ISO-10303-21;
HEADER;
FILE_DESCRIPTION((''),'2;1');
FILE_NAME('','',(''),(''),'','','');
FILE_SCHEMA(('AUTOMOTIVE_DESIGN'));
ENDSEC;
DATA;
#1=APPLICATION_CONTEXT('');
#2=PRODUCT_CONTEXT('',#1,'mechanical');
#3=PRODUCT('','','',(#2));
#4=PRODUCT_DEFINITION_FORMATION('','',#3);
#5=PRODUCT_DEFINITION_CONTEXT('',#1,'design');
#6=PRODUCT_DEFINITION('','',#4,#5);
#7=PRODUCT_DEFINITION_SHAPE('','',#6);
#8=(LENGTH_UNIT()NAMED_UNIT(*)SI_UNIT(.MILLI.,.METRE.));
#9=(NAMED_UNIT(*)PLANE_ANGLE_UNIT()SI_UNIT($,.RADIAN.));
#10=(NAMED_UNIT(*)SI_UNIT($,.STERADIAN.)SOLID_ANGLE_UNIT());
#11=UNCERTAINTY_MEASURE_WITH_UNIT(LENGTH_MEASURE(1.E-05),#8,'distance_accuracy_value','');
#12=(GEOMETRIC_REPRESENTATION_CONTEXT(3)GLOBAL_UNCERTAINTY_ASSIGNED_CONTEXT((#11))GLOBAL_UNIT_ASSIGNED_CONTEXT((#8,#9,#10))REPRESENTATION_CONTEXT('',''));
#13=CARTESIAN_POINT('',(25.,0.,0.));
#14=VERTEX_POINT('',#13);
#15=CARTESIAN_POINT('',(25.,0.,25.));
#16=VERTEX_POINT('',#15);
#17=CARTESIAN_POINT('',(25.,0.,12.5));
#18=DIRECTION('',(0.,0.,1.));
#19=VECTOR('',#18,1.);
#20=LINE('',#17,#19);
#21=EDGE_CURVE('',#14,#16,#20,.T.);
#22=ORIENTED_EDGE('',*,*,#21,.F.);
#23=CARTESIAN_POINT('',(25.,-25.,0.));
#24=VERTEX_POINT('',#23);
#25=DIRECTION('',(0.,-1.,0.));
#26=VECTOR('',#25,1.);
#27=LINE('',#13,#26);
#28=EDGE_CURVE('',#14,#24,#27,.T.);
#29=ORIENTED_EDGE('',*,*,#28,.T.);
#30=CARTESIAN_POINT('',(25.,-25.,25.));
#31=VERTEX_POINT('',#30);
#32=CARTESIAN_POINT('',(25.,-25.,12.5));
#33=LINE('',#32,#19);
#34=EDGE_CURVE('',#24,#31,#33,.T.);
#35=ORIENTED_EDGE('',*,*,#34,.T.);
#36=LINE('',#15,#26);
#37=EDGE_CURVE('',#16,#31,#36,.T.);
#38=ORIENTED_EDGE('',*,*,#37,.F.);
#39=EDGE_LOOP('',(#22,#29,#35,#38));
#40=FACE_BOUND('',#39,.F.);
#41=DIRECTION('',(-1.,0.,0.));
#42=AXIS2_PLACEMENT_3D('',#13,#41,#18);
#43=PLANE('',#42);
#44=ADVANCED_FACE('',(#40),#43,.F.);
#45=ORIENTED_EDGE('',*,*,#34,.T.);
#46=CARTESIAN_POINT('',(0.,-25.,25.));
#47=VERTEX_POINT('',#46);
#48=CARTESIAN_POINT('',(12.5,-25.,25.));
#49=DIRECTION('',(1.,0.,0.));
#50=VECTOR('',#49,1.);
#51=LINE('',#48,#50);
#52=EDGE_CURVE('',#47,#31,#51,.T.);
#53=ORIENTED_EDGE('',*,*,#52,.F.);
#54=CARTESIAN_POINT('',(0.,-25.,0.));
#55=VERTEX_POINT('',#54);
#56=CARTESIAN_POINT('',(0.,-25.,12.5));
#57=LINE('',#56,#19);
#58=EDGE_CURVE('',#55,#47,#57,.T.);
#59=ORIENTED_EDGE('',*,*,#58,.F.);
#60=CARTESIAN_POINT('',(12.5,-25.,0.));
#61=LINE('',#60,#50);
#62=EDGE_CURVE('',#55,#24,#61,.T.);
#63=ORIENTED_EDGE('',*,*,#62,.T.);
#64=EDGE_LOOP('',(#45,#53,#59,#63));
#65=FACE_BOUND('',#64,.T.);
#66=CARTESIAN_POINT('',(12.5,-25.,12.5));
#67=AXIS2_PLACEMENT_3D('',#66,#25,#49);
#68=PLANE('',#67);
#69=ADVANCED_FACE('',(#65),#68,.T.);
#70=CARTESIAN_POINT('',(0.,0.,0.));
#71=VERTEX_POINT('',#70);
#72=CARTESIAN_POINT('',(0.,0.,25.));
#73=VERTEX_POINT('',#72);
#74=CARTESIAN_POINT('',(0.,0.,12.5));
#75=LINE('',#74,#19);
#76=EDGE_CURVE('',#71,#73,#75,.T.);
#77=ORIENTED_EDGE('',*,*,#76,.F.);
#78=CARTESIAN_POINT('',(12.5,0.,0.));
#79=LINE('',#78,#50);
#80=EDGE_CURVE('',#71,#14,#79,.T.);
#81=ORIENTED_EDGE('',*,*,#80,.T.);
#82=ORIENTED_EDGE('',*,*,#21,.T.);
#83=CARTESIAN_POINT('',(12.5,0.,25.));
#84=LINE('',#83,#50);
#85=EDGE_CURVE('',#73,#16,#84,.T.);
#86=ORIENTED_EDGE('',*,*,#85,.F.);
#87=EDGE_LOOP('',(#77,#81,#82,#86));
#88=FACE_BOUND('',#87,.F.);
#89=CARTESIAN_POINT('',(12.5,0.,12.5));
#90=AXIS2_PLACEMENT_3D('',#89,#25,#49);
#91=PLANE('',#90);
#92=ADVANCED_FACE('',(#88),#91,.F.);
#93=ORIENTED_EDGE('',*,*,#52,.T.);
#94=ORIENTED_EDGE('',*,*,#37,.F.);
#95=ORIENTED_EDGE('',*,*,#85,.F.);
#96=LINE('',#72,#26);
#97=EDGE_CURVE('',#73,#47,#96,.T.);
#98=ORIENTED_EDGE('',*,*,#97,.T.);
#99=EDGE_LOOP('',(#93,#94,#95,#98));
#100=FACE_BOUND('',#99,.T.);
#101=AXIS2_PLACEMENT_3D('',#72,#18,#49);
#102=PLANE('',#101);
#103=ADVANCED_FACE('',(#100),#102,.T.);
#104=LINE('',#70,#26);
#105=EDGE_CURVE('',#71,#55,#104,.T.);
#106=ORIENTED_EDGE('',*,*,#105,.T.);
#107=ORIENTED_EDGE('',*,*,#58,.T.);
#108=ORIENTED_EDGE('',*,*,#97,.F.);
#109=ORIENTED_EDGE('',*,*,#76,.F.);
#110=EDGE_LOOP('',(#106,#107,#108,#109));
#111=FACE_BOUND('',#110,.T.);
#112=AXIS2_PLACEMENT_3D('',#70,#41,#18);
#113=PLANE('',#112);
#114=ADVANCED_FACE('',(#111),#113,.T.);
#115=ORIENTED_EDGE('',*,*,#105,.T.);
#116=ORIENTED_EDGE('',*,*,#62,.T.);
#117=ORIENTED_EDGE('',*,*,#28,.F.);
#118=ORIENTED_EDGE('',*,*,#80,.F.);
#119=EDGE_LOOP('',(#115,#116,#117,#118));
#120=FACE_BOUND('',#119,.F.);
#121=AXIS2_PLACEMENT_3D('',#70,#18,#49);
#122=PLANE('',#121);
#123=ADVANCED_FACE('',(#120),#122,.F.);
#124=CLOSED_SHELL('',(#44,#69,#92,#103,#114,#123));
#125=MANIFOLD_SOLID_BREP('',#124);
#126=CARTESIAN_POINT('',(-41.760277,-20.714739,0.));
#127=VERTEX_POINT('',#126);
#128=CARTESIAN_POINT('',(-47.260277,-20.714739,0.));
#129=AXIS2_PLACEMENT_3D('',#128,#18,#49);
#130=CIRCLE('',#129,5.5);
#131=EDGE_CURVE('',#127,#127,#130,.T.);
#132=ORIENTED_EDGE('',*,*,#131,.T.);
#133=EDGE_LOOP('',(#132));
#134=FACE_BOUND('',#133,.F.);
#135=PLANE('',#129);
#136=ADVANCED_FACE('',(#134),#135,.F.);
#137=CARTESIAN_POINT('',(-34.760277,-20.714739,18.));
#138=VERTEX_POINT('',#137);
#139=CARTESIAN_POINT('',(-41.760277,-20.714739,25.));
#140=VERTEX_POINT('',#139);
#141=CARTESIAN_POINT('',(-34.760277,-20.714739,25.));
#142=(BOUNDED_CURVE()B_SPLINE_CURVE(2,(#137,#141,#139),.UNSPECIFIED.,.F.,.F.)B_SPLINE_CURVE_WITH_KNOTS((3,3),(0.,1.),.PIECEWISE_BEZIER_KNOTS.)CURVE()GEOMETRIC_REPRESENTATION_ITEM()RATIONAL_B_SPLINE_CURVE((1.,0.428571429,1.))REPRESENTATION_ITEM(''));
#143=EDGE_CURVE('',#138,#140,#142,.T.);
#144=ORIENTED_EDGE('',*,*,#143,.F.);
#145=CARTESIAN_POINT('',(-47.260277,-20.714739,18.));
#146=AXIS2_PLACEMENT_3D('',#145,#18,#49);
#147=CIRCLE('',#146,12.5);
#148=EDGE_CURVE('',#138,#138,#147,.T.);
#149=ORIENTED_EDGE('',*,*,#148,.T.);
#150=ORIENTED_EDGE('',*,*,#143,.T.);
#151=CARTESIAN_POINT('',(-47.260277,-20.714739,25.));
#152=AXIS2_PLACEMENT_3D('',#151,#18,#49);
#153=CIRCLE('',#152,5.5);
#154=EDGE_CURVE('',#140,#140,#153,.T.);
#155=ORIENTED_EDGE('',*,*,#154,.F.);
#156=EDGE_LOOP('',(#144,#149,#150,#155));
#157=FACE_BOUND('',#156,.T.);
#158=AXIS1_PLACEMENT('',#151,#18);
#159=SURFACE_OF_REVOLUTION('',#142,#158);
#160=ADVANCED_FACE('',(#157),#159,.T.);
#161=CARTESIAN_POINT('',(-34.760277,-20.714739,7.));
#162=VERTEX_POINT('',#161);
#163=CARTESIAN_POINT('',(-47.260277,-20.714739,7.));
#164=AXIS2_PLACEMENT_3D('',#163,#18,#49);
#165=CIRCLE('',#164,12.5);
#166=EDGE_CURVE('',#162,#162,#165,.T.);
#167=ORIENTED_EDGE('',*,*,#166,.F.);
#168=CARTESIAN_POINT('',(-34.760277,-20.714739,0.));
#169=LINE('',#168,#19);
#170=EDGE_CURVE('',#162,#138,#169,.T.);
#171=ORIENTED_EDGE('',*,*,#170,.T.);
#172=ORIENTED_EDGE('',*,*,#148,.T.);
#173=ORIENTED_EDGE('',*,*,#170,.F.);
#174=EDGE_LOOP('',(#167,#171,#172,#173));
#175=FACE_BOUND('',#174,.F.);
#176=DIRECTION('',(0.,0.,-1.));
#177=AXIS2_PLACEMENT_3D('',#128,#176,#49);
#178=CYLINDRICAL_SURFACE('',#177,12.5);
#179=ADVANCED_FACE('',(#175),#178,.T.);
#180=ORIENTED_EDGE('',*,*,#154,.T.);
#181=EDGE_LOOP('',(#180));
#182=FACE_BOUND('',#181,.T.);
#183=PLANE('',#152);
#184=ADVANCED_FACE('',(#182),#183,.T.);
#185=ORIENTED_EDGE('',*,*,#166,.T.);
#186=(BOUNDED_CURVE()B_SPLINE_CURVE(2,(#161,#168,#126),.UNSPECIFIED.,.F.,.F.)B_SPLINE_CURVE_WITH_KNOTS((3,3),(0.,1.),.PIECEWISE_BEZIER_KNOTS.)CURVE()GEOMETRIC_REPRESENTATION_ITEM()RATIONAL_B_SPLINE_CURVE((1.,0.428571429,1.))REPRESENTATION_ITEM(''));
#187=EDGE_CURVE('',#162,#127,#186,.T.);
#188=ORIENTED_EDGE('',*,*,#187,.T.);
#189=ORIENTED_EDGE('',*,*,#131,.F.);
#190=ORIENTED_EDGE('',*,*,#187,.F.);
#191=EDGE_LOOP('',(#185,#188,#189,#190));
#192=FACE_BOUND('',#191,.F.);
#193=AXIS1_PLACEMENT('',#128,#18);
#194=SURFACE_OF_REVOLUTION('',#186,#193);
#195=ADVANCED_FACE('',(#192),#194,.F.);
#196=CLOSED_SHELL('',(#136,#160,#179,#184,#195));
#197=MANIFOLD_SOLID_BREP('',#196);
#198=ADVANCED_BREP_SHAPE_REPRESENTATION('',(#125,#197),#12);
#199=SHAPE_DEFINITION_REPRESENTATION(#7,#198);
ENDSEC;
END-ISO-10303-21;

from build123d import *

# Parameters (mm, degrees)
F0_W     = 25
F0_H     = 25
F1_DEPTH = 25
F2_R     = 12.5
F3_DEPTH = 25


# Not quite as in the source:
# - a fillet or chamfer that OpenCascade refuses, or shapes differently, is made with other operations: its cross-section is extruded or revolved along the edge and cut away or added


with BuildPart() as f1:
    # F0 (on Front) → F1 (new body)
    with BuildSketch(Plane.XZ):
        with Locations((12.5, 12.5)):
            Rectangle(F0_W, F0_H)
    extrude(amount=F1_DEPTH)


with BuildPart() as f3:
    # F2 (on Top) → F3 (new body)
    with BuildSketch(Plane.XY):
        with Locations((-47.2602769732, -20.7147393376)):
            Circle(F2_R)
    extrude(amount=F3_DEPTH)

    # F4: fillet of radius 7 on 2 edges, made by hand

    # F4_s1 → F4_t2 (revolve, cut)
    with BuildSketch(Plane.XZ.offset(20.7147393376)):
        with BuildLine():
            add(Edge.make_bspline(
                [(-34.7602769732, 18), (-34.7602769732, 25), (-41.7602769732, 25)],
                knots=[0, 0, 0, 1, 1, 1], degree=2, weights=[1, 0.4285714286, 1]))
            Line((-41.7602769732, 25), (-34.7602769732, 25))
            Line((-34.7602769732, 25), (-34.7602769732, 18))
        make_face()
    revolve(axis=Axis((-47.2602769732, -20.7147393376, 25), (0, 0, 1)), mode=Mode.SUBTRACT)

    # F4_s3 → F4_t4 (revolve, cut)
    with BuildSketch(Plane.XZ.offset(20.7147393376)):
        with BuildLine():
            add(Edge.make_bspline(
                [(-34.7602769732, 7), (-34.7602769732, 0), (-41.7602769732, 0)],
                knots=[0, 0, 0, 1, 1, 1], degree=2, weights=[1, 0.4285714286, 1]))
            Line((-41.7602769732, 0), (-34.7602769732, 0))
            Line((-34.7602769732, 0), (-34.7602769732, 7))
        make_face()
    revolve(axis=Axis((-47.2602769732, -20.7147393376, 0), (0, 0, 1)), mode=Mode.SUBTRACT)


solid = Compound([f1.part, f3.part])
